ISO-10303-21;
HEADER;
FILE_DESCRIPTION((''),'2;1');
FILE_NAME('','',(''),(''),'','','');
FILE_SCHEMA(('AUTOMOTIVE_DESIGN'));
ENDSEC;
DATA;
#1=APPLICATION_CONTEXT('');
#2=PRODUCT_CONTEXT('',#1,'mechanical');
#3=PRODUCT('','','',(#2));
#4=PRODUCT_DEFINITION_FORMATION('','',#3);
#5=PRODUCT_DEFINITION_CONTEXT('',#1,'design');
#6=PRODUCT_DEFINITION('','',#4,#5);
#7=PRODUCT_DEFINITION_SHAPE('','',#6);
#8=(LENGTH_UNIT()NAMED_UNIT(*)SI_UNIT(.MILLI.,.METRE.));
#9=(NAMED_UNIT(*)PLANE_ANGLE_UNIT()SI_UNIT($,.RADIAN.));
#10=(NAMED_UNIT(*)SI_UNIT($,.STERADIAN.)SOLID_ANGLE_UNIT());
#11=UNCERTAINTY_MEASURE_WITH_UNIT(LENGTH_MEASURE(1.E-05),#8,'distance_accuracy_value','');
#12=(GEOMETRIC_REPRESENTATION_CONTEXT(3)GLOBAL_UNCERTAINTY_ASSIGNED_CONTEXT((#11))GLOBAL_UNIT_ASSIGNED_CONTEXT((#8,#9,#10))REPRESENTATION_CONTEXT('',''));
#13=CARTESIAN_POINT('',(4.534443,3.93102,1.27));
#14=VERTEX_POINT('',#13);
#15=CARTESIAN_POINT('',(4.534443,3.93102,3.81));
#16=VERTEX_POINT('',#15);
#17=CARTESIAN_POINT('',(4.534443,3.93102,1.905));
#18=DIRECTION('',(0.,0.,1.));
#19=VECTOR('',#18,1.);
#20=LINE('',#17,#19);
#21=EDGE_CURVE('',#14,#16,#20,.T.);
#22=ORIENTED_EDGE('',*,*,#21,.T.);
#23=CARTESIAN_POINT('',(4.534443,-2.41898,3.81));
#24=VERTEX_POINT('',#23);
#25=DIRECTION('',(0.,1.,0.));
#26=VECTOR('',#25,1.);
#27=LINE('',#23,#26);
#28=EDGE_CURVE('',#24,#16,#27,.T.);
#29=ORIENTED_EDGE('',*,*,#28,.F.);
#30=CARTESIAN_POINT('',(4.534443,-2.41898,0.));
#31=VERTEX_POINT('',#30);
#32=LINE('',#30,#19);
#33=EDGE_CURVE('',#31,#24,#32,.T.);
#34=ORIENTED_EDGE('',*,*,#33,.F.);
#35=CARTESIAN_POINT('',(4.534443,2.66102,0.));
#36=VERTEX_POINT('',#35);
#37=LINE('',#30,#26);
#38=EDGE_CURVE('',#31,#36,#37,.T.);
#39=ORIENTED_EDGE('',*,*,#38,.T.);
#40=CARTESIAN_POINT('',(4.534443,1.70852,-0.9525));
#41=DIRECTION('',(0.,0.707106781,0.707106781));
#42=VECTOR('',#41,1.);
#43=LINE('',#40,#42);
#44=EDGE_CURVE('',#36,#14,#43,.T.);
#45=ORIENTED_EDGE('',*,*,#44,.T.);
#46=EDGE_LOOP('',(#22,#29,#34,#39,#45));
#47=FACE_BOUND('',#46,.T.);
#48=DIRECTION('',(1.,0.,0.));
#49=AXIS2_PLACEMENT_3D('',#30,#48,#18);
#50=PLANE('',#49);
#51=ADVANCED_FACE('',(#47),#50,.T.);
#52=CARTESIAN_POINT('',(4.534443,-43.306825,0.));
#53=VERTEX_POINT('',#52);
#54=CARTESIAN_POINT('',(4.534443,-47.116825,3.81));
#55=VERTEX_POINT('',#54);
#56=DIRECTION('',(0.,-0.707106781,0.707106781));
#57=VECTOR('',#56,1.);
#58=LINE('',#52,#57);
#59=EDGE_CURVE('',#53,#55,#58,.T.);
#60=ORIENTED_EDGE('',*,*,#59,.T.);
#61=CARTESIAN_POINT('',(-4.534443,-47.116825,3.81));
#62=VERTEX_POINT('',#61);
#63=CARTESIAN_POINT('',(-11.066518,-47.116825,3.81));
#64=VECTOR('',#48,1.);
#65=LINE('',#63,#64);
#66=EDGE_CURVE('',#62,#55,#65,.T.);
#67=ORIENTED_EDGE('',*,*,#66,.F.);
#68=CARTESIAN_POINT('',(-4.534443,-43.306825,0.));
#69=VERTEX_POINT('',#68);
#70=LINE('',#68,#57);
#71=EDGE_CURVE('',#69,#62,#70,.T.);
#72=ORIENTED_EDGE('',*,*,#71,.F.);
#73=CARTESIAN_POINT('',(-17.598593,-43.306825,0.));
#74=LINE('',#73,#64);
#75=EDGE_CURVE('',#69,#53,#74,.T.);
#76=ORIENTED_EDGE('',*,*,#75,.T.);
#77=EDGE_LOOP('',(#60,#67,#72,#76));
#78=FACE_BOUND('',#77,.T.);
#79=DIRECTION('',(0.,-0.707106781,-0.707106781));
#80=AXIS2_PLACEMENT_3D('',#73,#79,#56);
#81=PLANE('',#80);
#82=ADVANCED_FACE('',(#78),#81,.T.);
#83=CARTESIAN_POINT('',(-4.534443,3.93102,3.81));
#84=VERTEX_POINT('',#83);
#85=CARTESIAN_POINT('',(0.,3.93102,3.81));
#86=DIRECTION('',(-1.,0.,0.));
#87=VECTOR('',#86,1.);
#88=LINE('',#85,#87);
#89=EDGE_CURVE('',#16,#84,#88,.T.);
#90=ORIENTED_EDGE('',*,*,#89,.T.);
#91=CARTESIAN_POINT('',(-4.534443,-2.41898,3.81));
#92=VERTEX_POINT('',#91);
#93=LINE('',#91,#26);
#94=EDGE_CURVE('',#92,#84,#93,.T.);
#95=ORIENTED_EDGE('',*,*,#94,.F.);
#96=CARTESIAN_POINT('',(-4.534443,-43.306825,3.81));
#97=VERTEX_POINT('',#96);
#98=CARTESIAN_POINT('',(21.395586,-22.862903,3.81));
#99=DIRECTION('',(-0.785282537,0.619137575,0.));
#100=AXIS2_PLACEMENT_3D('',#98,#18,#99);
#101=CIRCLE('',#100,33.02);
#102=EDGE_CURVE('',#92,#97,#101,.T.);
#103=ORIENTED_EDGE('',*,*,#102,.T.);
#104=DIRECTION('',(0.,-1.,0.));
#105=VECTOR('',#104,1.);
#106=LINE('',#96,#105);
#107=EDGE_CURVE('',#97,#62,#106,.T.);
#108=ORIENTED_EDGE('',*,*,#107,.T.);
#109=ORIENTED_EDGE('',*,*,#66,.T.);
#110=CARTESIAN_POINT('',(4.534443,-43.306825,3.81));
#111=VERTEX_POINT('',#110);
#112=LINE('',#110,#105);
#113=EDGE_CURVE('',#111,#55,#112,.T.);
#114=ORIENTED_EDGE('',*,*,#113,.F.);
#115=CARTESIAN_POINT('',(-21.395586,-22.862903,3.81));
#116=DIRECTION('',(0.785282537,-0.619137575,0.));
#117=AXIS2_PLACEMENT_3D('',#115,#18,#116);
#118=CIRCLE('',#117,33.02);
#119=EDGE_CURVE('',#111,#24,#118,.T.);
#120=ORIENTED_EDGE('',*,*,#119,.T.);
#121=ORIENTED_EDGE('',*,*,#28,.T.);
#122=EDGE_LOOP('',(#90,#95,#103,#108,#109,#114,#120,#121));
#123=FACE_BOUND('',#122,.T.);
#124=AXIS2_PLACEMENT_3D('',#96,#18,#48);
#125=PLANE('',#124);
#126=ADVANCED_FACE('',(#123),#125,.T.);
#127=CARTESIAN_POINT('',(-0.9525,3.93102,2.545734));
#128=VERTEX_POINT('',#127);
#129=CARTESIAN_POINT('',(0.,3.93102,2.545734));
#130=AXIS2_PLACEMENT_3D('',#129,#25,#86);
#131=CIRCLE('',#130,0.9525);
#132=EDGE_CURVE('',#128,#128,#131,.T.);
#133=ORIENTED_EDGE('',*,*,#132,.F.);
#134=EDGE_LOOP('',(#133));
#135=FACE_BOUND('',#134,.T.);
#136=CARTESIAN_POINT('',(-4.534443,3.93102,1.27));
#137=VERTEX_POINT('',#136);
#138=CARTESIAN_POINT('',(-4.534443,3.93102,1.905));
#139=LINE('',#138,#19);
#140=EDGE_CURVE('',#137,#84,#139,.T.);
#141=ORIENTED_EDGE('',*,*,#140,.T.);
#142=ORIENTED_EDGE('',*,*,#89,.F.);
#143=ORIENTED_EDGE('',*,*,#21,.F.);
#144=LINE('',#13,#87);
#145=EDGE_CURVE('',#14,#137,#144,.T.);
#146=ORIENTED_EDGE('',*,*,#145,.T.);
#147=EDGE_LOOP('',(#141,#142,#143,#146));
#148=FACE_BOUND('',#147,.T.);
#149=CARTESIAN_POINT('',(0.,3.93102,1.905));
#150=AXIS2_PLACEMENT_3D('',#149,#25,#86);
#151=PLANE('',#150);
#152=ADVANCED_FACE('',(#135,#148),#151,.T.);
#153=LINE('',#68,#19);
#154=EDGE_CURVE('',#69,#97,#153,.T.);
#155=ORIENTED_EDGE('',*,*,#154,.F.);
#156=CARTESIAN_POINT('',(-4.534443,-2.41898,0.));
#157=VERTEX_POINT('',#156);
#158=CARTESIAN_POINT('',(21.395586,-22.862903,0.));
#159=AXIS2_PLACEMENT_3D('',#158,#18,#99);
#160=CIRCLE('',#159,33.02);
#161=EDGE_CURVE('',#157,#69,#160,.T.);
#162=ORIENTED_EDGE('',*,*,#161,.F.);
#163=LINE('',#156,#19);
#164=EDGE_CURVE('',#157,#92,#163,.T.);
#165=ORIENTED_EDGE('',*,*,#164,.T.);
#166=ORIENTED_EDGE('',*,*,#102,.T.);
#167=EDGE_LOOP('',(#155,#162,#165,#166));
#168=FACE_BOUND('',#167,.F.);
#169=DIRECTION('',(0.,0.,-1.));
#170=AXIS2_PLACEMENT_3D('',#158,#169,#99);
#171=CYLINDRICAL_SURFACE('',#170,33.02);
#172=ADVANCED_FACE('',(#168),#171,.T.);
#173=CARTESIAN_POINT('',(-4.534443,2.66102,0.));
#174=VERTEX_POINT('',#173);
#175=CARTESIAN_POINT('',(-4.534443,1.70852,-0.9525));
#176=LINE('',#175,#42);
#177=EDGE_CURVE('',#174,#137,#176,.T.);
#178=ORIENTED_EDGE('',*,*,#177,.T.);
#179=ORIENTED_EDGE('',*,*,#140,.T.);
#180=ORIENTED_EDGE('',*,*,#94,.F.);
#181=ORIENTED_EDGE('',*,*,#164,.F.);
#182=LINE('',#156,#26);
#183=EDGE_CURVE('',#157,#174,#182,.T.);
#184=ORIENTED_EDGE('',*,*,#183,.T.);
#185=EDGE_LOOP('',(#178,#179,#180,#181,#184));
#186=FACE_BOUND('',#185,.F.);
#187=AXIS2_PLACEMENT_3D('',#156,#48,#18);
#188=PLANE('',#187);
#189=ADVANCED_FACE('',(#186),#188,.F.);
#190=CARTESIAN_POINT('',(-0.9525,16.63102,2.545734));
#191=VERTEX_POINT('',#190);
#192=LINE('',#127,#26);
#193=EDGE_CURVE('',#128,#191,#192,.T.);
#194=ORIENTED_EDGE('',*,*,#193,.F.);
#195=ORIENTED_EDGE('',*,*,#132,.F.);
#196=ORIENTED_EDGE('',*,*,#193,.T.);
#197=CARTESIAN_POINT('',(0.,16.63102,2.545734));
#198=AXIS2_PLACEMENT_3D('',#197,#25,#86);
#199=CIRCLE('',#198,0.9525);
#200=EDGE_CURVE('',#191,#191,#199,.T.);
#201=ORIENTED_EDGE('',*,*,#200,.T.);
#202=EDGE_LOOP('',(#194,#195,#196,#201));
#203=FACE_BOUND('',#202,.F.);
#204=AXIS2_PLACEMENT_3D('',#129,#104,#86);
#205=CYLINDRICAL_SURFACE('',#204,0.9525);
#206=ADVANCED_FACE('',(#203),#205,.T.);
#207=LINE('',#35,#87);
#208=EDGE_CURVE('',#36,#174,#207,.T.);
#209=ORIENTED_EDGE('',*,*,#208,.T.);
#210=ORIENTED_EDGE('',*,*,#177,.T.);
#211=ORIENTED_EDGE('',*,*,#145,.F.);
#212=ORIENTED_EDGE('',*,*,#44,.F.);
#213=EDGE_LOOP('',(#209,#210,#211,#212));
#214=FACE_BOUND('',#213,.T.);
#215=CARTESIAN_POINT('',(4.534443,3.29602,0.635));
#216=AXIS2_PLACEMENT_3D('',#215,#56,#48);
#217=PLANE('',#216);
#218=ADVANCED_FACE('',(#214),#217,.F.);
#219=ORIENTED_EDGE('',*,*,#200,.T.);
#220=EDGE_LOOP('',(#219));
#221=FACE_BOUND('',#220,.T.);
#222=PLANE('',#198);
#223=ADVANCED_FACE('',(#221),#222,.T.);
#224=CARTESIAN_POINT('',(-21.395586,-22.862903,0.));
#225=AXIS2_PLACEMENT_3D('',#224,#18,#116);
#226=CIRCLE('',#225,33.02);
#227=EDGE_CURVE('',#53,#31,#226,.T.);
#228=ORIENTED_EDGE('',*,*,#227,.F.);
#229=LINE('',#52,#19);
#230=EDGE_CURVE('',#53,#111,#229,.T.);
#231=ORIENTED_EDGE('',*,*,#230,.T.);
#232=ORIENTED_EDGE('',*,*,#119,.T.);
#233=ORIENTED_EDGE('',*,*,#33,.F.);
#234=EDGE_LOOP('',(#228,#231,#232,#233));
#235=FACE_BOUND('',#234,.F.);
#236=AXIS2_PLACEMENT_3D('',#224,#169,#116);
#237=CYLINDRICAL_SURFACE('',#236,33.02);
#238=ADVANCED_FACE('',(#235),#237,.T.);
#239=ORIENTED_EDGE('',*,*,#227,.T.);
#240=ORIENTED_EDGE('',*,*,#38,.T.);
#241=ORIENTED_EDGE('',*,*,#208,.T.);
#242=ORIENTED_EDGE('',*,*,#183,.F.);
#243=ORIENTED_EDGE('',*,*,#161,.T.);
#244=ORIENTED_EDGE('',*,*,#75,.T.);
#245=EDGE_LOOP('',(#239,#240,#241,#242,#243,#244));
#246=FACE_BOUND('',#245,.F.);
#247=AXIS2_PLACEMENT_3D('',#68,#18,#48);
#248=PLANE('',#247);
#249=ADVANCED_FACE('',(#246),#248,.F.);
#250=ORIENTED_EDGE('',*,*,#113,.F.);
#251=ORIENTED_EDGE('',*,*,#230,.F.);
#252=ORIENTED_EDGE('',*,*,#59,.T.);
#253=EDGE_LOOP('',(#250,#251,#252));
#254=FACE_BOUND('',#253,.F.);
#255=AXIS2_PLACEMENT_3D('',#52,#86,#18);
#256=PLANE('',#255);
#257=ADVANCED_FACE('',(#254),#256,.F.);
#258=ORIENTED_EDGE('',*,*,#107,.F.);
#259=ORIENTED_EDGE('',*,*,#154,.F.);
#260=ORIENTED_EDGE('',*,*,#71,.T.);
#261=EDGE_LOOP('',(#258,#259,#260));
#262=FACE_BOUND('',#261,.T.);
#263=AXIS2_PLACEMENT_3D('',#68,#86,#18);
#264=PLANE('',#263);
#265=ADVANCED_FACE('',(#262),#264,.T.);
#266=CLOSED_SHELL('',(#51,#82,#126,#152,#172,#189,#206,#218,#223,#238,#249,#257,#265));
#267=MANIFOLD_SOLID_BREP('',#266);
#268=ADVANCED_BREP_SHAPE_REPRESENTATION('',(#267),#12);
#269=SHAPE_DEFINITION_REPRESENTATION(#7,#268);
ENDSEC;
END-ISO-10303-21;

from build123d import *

# Parameters (mm, degrees)
F1_DEPTH    = 3.81
F2_W        = 9.0688861602
F2_H        = 3.81
F3_DEPTH    = 6.35
F4_SIZE     = 1.27
F5_W        = 9.0688861602
F5_H        = 3.81
F6_DEPTH    = 5.08
F7_T1_DEPTH = 35.1971853179
F8_R        = 0.9525
F9_DEPTH    = 12.7


# Not quite as in the source:
# - a fillet or chamfer that OpenCascade refuses, or shapes differently, is made with other operations: its cross-section is extruded or revolved along the edge and cut away or added


with BuildPart() as f1:
    # F0 (on Top) → F1 (new body)
    with BuildSketch(Plane.XY):
        with BuildLine():
            Line((4.5344430801, -2.4189800566), (-4.5344430801, -2.4189800566))
            ThreePointArc((-4.5344430801, -2.4189800566), (-11.6244136954, -22.8629027748), (-4.5344430801, -43.306825493))
            Line((-4.5344430801, -43.306825493), (4.5344430801, -43.306825493))
            ThreePointArc((4.5344430801, -43.306825493), (11.6244136954, -22.8629027748), (4.5344430801, -2.4189800566))
        make_face()
    extrude(amount=F1_DEPTH)

    # F2 (on face) → F3 (join)
    with BuildSketch(Plane(origin=(0, -2.4189800566, 0), x_dir=(-1, 0, 0), z_dir=(0, 1, 0))):
        with Locations((0, 1.905)):
            Rectangle(F2_W, F2_H)
    extrude(amount=F3_DEPTH)

    # F4
    f4_edges = [f1.edges().sort_by_distance(p)[0] for p in [
        (0, 3.93102, 0),
    ]]
    chamfer(f4_edges, length=F4_SIZE)

    # F5 (on face) → F6 (join)
    with BuildSketch(Plane.XZ.offset(43.306825493)):
        with Locations((0, 1.905)):
            Rectangle(F5_W, F5_H)
    extrude(amount=F6_DEPTH)

    # F7: chamfer of 5.08 on 1 edges, made by hand

    # F7_s2 → F7_t1 (cut)
    with BuildSketch(Plane.YZ.offset(-17.598592659)):
        Polygon((-43.306825493, 0), (-48.386825493, 5.08), (-48.386825493, 0), align=None)
    extrude(amount=F7_T1_DEPTH, mode=Mode.SUBTRACT)

    # F8 (on face) → F9 (join)
    with BuildSketch(Plane(origin=(0, 3.9310199434, 0), x_dir=(-1, 0, 0), z_dir=(0, 1, 0))):
        with Locations((0, 2.5457337033)):
            Circle(F8_R)
    extrude(amount=F9_DEPTH)


solid = f1.part
